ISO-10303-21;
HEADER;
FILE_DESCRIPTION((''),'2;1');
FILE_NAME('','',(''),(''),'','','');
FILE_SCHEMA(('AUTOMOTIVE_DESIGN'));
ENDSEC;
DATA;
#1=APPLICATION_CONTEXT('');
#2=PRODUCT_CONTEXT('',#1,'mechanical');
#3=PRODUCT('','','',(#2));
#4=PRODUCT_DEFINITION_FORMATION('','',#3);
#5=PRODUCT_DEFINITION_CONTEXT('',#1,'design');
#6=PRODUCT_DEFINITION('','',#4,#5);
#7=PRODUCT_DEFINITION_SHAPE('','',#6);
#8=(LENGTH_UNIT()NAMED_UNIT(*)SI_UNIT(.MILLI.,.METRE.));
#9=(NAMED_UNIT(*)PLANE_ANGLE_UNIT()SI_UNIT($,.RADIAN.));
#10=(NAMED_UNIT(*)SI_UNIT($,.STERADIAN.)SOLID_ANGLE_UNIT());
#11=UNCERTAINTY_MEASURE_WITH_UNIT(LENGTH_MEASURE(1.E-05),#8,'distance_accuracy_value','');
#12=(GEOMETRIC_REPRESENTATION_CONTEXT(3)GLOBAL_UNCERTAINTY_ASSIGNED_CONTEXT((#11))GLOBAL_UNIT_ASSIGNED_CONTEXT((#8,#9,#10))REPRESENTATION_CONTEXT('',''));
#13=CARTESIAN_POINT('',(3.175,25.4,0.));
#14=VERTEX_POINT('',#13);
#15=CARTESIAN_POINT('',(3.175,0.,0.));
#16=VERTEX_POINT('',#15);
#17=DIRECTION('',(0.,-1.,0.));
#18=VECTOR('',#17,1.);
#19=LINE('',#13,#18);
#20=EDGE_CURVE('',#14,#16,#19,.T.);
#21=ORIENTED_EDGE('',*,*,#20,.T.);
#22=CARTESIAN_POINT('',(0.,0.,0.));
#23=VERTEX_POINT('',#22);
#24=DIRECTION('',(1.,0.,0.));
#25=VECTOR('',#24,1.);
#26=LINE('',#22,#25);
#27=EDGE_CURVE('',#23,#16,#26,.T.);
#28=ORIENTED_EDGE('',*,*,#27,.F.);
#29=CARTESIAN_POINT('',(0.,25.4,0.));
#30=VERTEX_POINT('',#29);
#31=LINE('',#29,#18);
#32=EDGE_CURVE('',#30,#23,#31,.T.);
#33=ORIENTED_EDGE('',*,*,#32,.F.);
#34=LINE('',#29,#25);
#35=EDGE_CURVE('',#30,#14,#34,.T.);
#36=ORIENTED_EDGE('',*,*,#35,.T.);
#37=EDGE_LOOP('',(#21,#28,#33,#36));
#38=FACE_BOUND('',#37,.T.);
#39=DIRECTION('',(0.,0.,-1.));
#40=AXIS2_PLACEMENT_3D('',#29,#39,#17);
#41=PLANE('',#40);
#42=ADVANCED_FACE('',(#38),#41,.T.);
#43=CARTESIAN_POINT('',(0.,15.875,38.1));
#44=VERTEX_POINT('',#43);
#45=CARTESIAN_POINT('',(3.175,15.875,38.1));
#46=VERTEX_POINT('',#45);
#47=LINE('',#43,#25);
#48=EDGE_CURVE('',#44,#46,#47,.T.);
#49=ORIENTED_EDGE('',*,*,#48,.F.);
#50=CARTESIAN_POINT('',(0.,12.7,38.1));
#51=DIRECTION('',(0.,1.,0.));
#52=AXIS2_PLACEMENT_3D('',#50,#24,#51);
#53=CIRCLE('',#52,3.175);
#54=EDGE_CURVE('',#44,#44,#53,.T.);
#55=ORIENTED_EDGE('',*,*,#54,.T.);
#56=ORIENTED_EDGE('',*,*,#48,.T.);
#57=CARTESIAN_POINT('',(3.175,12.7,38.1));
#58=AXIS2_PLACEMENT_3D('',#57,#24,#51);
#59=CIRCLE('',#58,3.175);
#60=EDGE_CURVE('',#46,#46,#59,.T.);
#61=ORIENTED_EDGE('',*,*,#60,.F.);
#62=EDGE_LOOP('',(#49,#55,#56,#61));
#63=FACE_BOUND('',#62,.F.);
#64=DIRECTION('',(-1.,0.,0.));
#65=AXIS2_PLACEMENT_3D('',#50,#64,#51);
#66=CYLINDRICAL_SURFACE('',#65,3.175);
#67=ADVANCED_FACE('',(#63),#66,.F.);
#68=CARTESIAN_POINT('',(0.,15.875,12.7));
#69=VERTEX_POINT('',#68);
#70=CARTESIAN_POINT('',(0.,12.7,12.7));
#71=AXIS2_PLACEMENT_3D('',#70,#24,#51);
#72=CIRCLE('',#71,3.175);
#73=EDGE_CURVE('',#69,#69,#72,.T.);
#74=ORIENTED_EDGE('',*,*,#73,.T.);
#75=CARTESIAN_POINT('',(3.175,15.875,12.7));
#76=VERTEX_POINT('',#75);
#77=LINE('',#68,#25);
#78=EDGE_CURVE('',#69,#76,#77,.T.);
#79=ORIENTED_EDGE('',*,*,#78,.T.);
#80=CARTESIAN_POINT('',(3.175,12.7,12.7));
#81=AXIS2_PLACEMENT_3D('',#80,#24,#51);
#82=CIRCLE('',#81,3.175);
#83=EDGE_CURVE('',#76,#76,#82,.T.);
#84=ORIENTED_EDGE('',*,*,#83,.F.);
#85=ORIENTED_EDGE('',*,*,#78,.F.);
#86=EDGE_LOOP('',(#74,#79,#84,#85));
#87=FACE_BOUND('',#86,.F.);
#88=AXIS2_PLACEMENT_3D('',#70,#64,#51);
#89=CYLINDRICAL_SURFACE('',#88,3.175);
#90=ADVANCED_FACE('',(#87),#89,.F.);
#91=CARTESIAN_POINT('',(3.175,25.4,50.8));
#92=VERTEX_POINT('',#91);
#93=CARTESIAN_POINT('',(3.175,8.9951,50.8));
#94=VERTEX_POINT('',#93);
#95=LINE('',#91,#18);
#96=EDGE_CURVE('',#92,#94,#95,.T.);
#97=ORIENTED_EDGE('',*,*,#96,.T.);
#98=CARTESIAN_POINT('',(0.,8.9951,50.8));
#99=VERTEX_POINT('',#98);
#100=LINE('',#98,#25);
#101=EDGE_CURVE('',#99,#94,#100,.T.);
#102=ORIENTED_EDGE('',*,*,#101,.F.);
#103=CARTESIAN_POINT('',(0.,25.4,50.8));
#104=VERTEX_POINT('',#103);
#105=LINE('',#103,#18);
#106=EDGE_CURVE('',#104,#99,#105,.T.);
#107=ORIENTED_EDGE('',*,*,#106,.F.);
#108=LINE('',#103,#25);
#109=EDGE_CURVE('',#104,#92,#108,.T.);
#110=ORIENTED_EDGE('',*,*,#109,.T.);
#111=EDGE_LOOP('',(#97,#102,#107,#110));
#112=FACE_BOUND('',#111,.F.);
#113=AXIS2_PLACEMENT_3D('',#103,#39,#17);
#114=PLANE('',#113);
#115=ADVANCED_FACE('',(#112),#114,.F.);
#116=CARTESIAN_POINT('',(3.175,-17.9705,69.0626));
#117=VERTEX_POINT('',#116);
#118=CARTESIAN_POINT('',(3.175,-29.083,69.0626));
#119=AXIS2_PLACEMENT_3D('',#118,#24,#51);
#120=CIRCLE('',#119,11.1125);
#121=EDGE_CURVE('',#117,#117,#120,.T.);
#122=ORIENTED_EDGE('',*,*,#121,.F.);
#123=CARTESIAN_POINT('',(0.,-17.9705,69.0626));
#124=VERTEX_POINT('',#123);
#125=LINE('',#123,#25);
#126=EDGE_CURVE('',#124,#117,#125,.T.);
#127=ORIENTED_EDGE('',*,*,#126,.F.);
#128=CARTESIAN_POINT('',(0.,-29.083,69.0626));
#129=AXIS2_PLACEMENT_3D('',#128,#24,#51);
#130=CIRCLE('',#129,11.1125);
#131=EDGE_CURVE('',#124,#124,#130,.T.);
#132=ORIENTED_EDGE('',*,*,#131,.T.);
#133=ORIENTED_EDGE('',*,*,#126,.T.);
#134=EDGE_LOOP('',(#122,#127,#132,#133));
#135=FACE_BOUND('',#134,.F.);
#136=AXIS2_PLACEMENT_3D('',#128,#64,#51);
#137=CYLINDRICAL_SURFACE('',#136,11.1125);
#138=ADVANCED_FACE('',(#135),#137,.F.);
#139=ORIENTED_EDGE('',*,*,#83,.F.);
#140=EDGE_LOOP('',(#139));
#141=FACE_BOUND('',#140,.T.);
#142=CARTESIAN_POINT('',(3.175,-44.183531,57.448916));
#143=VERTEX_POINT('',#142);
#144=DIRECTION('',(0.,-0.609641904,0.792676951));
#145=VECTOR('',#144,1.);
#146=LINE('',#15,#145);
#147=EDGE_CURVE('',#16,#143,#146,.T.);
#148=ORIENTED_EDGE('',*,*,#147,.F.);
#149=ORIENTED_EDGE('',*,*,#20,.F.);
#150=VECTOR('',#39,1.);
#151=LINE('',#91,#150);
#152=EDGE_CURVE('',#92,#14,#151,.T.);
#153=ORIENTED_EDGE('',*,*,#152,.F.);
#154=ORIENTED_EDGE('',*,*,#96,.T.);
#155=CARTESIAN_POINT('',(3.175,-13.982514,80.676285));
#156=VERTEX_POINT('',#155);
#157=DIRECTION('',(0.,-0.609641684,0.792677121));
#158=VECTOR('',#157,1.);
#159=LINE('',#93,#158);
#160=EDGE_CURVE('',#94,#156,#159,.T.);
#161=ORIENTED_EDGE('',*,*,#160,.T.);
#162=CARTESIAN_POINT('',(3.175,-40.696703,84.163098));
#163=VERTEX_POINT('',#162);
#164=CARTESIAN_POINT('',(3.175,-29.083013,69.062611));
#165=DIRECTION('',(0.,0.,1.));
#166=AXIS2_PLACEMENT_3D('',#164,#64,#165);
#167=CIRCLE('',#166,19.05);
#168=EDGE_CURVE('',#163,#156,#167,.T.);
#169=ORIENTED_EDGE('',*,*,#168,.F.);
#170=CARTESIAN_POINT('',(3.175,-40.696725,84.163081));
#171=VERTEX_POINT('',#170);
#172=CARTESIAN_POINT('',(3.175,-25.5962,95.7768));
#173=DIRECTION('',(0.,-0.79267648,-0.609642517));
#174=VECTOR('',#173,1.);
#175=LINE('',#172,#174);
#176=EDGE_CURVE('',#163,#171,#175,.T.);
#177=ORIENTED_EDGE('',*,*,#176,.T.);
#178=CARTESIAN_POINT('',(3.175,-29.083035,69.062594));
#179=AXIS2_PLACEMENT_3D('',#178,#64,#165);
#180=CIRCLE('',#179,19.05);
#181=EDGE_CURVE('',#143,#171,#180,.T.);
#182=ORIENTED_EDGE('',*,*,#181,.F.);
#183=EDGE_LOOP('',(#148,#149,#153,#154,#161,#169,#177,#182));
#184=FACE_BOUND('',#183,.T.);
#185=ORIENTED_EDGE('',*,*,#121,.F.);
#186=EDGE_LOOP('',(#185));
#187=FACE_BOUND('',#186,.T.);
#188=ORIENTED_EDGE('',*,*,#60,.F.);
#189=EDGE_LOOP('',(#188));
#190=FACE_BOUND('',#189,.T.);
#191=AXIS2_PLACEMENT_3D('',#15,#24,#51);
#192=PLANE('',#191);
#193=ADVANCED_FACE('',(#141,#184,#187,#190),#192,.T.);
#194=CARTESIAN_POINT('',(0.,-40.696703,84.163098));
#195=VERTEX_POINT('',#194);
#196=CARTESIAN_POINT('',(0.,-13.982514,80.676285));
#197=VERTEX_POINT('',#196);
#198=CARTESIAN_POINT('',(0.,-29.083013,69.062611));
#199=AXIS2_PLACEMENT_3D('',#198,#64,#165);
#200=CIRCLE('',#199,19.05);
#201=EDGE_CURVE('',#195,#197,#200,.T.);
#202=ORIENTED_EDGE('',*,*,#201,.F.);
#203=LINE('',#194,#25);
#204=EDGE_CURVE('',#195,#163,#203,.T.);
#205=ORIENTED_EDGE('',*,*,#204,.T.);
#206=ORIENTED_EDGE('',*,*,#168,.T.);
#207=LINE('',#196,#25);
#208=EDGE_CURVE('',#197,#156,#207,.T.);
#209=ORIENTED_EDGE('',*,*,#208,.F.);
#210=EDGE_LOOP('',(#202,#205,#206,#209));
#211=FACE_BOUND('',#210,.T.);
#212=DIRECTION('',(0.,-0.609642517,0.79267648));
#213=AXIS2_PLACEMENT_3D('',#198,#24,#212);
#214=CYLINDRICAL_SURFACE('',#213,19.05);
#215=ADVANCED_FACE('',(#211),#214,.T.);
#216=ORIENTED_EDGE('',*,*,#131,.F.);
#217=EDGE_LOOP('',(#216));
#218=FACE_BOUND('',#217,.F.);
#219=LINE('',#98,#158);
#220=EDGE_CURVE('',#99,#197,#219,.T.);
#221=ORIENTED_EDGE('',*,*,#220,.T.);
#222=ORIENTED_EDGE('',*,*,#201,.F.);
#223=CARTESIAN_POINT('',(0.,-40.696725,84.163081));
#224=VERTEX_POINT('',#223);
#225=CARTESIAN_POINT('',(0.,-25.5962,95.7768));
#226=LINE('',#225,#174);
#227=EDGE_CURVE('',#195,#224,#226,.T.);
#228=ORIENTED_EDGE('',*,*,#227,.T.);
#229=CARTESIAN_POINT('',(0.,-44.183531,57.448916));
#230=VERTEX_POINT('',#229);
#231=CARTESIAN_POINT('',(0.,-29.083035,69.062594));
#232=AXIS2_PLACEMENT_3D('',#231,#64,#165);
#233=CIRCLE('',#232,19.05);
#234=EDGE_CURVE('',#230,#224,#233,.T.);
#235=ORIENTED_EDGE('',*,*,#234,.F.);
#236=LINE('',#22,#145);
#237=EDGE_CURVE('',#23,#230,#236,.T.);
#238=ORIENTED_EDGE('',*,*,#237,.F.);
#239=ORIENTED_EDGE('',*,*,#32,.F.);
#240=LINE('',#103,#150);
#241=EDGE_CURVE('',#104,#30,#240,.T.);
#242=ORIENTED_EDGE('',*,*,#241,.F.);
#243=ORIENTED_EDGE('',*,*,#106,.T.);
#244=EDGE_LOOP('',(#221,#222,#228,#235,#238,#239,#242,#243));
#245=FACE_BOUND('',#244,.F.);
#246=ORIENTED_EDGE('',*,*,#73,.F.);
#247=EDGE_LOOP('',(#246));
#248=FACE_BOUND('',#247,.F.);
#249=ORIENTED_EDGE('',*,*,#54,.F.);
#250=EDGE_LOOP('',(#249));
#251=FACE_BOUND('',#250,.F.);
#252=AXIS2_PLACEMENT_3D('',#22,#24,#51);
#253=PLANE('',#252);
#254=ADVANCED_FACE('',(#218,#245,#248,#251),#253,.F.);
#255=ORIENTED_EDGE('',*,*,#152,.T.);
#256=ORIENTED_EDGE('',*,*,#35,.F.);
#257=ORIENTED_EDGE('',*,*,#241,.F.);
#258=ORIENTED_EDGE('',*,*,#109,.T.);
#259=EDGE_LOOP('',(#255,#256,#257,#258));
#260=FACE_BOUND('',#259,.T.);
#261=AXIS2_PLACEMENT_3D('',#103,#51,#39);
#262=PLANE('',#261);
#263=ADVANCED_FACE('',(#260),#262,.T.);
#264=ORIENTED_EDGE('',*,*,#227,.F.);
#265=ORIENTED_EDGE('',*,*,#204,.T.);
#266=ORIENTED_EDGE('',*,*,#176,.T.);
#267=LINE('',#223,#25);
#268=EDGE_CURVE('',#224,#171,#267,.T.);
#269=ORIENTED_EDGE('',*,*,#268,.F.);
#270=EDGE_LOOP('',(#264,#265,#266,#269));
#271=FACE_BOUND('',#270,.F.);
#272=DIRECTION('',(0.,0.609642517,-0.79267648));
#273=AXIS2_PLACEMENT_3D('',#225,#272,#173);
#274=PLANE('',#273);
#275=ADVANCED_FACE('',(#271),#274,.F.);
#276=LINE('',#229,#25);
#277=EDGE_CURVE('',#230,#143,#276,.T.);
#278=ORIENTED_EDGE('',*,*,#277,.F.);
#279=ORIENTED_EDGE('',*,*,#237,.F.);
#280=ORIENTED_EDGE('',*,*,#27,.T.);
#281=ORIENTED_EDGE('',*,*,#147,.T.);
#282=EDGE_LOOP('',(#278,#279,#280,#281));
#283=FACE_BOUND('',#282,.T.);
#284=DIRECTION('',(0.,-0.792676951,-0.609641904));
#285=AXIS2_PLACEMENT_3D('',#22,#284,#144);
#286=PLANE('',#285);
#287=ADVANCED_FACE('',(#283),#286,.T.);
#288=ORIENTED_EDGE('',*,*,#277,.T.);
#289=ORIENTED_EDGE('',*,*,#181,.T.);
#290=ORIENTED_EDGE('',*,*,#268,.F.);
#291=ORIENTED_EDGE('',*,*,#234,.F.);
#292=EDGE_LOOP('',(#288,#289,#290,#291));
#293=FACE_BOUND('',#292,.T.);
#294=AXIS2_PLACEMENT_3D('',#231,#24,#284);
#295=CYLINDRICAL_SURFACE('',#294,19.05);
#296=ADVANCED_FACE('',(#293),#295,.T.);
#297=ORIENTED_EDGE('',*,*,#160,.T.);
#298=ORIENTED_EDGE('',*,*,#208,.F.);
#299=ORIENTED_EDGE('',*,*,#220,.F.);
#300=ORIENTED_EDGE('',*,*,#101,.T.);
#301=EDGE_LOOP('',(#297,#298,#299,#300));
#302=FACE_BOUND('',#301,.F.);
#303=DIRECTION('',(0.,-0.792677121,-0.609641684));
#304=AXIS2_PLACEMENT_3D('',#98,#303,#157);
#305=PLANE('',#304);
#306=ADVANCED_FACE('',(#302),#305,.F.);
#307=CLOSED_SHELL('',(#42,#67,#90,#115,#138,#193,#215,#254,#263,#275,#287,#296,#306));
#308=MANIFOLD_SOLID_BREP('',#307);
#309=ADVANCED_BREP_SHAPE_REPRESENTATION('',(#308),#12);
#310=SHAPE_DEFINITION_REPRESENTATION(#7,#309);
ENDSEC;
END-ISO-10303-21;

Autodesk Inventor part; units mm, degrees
ref_plane "YZ Plane" through (0, 0, 0) normal (1, 0, 0) x (0, 1, 0)
ref_plane "XZ Plane" through (0, 0, 0) normal (0, 1, 0) x (-1, 0, 0)
ref_plane "XY Plane" through (0, 0, 0) normal (0, 0, 1) x (1, 0, 0)
sketch "Sketch1" plane through (0, 0, 0) normal (1, 0, 0) x (0, 1, 0)
  line L0 (25.4, 50.8) -> (25.4, 0)
  line L1 (25.4, 0) -> (0, 0)
  line L2 (0, 0) -> (-55.7972, 72.5494)
  line L3 (25.4, 50.8) -> (8.9951, 50.8)
  line L4 (8.9951, 50.8) -> (-25.5962, 95.7768)
  line L5 (-25.5962, 95.7768) -> (-55.7972, 72.5494)
  circle A0 centre (-29.083, 69.0626) radius 11.1125
  line L6 (-40.6967, 84.1631) -> (-29.083, 69.0626) construction
  line L7 (25.4, 25.4) -> (-19.5349, 25.4) construction
  line L8 (12.7, 0) -> (12.7, 50.8) construction
  circle A1 centre (12.7, 12.7) radius 3.175
  circle A2 centre (12.7, 38.1) radius 3.175
  dimension "d9" = 38.1
  dimension "d10" = 19.05
  dimension "d11" = 50.8
  dimension "d12" = 29.083
  dimension "d13" = 43.6626
  dimension "d14" = 25.4
  dimension "d16" = 22.225
  dimension "d17" = 6.35
  dimension "d18" = 12.7
  dimension "d19" = 25.4
extrude "Extrusion1" add sketch "Sketch1" along normal blind 3.175
fillet "Fillet1" radius 19.05 2 edges at (1.5875, -25.5962, 95.7768) (1.5875, -55.7972, 72.5494)
properties part number "Rear roller plate"
